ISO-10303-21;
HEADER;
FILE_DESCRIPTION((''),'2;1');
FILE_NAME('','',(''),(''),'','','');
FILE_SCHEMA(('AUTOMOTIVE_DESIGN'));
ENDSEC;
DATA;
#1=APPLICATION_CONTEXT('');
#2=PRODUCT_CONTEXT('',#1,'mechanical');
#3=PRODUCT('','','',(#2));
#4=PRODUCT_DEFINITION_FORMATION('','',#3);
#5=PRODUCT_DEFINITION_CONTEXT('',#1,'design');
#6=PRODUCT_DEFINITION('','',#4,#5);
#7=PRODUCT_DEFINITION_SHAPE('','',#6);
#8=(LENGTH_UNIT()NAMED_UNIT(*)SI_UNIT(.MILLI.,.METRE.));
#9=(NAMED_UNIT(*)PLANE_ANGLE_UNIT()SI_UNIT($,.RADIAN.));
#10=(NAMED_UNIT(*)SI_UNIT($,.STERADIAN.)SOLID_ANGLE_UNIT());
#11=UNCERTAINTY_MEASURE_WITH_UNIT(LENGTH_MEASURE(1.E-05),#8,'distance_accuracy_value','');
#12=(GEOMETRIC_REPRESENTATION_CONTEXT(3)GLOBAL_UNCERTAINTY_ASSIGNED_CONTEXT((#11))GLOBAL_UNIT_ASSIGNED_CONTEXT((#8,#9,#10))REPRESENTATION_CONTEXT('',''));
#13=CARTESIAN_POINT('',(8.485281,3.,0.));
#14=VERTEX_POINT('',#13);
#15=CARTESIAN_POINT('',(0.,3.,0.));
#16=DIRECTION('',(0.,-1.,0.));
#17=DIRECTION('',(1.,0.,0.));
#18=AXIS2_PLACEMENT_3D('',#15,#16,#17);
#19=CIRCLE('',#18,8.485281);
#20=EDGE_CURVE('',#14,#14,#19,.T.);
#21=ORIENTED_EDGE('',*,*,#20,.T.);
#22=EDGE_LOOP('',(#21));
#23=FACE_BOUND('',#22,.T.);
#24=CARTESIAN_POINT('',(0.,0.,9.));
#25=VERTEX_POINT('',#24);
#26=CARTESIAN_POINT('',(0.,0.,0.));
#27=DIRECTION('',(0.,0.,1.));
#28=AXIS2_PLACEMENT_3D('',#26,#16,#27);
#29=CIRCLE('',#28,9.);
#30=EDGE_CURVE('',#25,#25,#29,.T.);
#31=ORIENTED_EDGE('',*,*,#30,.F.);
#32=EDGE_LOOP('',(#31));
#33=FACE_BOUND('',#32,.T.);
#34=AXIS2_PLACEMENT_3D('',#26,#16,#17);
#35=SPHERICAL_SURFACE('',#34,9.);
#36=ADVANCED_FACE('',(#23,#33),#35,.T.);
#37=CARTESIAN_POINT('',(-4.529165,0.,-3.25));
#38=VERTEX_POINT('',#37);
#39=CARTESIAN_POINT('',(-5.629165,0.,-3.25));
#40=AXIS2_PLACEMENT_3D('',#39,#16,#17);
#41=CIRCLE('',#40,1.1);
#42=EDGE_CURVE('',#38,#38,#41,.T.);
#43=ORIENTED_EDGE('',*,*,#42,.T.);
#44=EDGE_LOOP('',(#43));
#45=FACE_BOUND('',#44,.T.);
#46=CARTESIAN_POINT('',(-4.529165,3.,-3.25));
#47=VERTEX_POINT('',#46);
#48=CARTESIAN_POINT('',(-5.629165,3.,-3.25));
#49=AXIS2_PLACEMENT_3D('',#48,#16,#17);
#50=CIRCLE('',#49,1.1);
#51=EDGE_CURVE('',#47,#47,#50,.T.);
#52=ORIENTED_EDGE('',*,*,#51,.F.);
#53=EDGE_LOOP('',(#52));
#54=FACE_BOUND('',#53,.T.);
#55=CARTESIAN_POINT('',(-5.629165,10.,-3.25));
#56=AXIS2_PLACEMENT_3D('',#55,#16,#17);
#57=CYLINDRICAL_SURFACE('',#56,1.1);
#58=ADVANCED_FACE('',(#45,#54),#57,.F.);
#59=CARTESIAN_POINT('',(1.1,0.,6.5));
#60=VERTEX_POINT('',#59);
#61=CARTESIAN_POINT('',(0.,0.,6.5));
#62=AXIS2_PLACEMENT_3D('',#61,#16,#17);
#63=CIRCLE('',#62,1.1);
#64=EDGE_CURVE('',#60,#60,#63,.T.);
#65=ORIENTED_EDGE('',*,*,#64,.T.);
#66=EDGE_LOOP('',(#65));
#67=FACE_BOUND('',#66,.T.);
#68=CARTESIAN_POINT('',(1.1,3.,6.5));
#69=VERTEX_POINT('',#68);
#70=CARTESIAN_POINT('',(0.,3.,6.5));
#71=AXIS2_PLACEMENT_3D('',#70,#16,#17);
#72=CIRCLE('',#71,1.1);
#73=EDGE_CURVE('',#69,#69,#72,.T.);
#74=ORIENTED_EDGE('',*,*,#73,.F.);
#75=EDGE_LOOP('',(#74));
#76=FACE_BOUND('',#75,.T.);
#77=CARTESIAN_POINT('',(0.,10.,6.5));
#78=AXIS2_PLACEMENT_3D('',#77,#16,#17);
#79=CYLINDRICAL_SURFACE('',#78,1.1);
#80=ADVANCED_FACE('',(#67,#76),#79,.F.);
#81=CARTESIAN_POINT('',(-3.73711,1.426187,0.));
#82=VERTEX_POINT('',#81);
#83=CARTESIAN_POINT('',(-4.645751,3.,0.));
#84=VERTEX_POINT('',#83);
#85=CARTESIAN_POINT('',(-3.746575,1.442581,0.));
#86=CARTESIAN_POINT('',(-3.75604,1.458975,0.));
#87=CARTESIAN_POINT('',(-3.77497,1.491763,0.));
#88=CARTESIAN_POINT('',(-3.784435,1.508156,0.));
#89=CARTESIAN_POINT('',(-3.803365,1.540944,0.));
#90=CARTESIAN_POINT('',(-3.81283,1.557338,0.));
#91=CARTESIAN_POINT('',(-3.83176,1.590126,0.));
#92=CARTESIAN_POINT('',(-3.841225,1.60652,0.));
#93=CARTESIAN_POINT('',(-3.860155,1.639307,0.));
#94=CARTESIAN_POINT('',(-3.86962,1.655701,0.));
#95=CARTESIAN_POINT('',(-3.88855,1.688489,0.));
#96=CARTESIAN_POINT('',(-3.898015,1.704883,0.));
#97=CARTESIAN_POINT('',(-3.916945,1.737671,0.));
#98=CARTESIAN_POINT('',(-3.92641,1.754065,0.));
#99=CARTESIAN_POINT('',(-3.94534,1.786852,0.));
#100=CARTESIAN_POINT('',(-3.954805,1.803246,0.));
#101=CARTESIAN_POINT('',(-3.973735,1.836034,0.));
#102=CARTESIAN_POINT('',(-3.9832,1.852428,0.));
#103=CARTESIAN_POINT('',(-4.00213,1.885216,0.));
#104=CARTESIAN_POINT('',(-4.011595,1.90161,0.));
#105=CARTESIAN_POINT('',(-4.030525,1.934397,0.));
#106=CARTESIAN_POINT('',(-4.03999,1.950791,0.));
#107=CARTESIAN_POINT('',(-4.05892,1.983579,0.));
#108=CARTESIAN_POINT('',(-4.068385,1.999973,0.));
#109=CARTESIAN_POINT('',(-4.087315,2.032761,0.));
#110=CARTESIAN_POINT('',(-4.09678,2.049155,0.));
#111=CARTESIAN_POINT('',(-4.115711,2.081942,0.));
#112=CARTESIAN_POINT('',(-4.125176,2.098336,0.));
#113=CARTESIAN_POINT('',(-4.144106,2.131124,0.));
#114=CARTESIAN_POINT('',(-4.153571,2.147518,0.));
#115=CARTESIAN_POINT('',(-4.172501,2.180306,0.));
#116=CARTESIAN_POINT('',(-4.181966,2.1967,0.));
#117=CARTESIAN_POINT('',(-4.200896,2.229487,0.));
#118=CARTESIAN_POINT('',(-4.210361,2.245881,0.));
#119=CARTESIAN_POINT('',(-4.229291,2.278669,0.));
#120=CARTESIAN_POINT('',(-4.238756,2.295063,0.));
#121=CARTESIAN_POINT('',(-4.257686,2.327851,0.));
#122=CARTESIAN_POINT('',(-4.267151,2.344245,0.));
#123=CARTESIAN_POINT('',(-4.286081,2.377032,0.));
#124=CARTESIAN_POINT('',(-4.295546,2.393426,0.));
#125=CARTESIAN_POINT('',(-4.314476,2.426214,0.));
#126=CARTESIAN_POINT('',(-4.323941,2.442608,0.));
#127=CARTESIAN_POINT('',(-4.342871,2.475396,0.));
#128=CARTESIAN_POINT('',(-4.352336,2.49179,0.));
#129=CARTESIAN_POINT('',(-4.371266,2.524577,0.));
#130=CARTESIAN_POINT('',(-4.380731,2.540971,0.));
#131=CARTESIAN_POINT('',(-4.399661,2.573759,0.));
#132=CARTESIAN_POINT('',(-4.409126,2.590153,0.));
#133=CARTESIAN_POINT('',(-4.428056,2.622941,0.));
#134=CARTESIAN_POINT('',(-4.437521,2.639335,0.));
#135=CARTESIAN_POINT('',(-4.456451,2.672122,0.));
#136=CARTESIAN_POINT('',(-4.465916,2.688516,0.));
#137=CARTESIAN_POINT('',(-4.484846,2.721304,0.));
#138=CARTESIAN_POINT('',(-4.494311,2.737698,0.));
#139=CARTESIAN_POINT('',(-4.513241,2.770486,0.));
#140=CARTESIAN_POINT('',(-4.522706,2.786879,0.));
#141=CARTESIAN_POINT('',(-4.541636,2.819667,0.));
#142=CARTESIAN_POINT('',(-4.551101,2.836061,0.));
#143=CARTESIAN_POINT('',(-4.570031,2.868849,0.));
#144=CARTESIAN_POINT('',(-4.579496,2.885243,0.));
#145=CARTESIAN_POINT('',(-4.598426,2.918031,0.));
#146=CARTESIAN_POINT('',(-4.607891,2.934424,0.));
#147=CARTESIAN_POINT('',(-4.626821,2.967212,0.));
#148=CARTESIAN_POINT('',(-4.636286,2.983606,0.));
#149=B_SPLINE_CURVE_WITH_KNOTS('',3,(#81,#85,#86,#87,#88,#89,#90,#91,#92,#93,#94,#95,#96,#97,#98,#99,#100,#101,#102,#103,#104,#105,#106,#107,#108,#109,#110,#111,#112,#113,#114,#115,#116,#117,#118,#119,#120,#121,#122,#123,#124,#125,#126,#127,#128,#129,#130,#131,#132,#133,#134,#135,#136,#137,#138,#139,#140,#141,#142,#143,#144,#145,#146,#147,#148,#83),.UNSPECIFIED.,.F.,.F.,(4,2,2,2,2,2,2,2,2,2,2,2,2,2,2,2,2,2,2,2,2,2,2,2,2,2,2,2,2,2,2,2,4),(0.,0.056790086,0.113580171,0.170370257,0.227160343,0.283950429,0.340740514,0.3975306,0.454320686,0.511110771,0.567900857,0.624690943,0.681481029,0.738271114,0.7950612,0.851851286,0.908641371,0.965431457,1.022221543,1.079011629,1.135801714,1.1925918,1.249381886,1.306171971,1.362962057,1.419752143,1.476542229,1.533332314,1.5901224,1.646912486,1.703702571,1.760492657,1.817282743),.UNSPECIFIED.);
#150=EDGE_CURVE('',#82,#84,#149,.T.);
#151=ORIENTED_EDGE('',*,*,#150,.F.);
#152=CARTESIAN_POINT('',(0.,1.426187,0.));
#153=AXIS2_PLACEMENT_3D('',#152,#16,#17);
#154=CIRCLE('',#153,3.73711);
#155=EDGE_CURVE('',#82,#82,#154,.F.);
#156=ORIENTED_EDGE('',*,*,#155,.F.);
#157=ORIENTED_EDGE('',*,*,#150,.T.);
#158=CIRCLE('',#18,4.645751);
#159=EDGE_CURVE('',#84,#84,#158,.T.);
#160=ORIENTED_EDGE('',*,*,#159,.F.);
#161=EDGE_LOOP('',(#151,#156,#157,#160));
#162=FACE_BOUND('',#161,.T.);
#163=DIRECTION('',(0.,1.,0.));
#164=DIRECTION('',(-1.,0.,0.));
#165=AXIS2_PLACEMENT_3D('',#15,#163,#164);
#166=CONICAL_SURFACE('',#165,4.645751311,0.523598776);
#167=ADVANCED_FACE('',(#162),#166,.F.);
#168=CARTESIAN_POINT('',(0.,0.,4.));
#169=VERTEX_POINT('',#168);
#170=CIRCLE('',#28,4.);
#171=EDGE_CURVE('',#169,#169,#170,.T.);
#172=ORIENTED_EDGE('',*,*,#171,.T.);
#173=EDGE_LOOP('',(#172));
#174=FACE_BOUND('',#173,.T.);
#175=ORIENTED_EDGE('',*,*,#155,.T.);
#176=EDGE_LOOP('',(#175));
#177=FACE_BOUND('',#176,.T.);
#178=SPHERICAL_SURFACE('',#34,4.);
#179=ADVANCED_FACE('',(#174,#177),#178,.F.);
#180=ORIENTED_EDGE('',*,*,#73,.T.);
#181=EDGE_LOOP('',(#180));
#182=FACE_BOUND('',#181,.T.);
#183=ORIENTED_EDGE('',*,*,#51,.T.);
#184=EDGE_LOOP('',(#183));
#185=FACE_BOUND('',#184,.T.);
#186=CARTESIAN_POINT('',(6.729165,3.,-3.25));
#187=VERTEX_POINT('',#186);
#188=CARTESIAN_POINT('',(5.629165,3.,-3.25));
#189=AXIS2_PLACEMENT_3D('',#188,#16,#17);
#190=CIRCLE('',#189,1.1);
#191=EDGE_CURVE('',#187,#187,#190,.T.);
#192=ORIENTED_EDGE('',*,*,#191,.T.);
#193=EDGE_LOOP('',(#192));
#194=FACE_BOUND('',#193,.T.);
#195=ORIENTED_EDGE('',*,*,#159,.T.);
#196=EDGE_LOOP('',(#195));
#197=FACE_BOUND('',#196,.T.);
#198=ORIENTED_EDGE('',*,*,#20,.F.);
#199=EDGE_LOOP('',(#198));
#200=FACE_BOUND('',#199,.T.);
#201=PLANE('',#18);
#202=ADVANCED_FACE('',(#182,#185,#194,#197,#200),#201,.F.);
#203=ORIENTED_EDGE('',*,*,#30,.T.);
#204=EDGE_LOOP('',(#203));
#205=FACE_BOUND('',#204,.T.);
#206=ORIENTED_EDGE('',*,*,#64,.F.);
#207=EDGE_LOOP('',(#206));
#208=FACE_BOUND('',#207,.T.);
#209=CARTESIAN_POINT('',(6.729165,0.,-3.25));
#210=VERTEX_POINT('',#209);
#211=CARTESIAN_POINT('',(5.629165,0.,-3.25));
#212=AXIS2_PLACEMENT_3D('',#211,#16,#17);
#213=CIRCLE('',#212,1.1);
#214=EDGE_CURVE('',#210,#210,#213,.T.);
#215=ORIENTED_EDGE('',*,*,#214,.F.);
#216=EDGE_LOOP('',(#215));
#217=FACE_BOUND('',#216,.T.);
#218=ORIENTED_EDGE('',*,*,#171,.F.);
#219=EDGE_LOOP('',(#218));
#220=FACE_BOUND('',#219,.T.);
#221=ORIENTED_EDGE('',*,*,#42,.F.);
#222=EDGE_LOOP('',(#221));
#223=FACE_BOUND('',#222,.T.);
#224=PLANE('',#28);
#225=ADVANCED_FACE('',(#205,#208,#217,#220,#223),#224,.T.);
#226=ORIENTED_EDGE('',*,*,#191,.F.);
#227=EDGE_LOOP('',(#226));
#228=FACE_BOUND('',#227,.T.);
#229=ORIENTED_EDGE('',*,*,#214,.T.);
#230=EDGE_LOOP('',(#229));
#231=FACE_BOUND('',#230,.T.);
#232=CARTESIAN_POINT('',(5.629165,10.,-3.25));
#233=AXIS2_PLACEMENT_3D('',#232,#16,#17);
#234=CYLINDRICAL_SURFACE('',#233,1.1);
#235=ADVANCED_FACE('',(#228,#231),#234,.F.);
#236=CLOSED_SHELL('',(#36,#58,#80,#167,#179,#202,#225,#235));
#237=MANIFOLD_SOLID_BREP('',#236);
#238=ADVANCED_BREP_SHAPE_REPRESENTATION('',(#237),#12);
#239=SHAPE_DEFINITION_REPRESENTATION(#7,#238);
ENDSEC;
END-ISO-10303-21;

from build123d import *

# Parameters (mm, degrees)
REVOLVE1_ANGLE     = 180
CHAMFER2_SIZE      = 2
SKETCH2_R          = 1.1
CUT_EXTRUDE1_DEPTH = 10


# Read off the part's stored shape, not the designer's step: Body-Delete/Keep 1
with BuildPart() as part:
    # Sketch1 → Revolve1 (revolve)
    with BuildSketch(Plane(origin=(0, 0, 0), x_dir=(1, 0, 0), z_dir=(0, 1, 0))):
        with BuildLine():
            ThreePointArc((9, 0), (6.363961031, 6.363961031), (0, 9))
            Line((0, 9), (0, 4))
            ThreePointArc((0, 4), (2.828427125, 2.828427125), (4, 0))
            ThreePointArc((4, 0), (2.828427125, -2.828427125), (0, -4))
            Line((0, -4), (0, -9))
            ThreePointArc((0, -9), (6.363961031, -6.363961031), (9, 0))
        make_face()
    revolve(axis=Axis((0, 0, -9), (0, 0, 1)), revolution_arc=REVOLVE1_ANGLE)


with BuildPart() as body_2:
    # Split1: the piece on the far side of the plane
    add(part.part)
    split(bisect_by=Plane(origin=(0, 3, 0), x_dir=(-1, 0, 0), z_dir=(0, -1, 0)), keep=Keep.BOTTOM)


with BuildPart() as part_1:
    add(part.part)

    # Split1
    split(bisect_by=Plane(origin=(0, 3, 0), x_dir=(-1, 0, 0), z_dir=(0, -1, 0)), keep=Keep.TOP)

    # Chamfer2
    # the kernel refuses this chamfer: 2, 1.766969722 mm, written as the material it takes off along each edge
    with BuildSketch(Plane(origin=(0, 3, 0), x_dir=(1, 0, 0), z_dir=(0, 0, -1))) as chamfer2_piece_1:
        with BuildLine():
            Line((2.645751311 + CHAMFER2_SIZE, 0), (3.73710994, 1.573813021))
            ThreePointArc((3.73710994, 1.573813021), (3.297092522, 0.735230497), (2.645751311, 0))
            Line((2.645751311, 0), (2.645751311 + CHAMFER2_SIZE, 0))
        make_face()
    revolve(axis=Axis((0, 3, 0), (0, -1, 0)), mode=Mode.SUBTRACT)

    # Sketch2 → Cut-Extrude1 (cut)
    with BuildSketch(Plane.XZ):
        with Locations((0, 6.5)):
            Circle(SKETCH2_R)
        with Locations((5.629165125, -3.25)):
            Circle(SKETCH2_R)
        with Locations((-5.629165125, -3.25)):
            Circle(SKETCH2_R)
    extrude(amount=-CUT_EXTRUDE1_DEPTH, mode=Mode.SUBTRACT)


solid = part_1.part
